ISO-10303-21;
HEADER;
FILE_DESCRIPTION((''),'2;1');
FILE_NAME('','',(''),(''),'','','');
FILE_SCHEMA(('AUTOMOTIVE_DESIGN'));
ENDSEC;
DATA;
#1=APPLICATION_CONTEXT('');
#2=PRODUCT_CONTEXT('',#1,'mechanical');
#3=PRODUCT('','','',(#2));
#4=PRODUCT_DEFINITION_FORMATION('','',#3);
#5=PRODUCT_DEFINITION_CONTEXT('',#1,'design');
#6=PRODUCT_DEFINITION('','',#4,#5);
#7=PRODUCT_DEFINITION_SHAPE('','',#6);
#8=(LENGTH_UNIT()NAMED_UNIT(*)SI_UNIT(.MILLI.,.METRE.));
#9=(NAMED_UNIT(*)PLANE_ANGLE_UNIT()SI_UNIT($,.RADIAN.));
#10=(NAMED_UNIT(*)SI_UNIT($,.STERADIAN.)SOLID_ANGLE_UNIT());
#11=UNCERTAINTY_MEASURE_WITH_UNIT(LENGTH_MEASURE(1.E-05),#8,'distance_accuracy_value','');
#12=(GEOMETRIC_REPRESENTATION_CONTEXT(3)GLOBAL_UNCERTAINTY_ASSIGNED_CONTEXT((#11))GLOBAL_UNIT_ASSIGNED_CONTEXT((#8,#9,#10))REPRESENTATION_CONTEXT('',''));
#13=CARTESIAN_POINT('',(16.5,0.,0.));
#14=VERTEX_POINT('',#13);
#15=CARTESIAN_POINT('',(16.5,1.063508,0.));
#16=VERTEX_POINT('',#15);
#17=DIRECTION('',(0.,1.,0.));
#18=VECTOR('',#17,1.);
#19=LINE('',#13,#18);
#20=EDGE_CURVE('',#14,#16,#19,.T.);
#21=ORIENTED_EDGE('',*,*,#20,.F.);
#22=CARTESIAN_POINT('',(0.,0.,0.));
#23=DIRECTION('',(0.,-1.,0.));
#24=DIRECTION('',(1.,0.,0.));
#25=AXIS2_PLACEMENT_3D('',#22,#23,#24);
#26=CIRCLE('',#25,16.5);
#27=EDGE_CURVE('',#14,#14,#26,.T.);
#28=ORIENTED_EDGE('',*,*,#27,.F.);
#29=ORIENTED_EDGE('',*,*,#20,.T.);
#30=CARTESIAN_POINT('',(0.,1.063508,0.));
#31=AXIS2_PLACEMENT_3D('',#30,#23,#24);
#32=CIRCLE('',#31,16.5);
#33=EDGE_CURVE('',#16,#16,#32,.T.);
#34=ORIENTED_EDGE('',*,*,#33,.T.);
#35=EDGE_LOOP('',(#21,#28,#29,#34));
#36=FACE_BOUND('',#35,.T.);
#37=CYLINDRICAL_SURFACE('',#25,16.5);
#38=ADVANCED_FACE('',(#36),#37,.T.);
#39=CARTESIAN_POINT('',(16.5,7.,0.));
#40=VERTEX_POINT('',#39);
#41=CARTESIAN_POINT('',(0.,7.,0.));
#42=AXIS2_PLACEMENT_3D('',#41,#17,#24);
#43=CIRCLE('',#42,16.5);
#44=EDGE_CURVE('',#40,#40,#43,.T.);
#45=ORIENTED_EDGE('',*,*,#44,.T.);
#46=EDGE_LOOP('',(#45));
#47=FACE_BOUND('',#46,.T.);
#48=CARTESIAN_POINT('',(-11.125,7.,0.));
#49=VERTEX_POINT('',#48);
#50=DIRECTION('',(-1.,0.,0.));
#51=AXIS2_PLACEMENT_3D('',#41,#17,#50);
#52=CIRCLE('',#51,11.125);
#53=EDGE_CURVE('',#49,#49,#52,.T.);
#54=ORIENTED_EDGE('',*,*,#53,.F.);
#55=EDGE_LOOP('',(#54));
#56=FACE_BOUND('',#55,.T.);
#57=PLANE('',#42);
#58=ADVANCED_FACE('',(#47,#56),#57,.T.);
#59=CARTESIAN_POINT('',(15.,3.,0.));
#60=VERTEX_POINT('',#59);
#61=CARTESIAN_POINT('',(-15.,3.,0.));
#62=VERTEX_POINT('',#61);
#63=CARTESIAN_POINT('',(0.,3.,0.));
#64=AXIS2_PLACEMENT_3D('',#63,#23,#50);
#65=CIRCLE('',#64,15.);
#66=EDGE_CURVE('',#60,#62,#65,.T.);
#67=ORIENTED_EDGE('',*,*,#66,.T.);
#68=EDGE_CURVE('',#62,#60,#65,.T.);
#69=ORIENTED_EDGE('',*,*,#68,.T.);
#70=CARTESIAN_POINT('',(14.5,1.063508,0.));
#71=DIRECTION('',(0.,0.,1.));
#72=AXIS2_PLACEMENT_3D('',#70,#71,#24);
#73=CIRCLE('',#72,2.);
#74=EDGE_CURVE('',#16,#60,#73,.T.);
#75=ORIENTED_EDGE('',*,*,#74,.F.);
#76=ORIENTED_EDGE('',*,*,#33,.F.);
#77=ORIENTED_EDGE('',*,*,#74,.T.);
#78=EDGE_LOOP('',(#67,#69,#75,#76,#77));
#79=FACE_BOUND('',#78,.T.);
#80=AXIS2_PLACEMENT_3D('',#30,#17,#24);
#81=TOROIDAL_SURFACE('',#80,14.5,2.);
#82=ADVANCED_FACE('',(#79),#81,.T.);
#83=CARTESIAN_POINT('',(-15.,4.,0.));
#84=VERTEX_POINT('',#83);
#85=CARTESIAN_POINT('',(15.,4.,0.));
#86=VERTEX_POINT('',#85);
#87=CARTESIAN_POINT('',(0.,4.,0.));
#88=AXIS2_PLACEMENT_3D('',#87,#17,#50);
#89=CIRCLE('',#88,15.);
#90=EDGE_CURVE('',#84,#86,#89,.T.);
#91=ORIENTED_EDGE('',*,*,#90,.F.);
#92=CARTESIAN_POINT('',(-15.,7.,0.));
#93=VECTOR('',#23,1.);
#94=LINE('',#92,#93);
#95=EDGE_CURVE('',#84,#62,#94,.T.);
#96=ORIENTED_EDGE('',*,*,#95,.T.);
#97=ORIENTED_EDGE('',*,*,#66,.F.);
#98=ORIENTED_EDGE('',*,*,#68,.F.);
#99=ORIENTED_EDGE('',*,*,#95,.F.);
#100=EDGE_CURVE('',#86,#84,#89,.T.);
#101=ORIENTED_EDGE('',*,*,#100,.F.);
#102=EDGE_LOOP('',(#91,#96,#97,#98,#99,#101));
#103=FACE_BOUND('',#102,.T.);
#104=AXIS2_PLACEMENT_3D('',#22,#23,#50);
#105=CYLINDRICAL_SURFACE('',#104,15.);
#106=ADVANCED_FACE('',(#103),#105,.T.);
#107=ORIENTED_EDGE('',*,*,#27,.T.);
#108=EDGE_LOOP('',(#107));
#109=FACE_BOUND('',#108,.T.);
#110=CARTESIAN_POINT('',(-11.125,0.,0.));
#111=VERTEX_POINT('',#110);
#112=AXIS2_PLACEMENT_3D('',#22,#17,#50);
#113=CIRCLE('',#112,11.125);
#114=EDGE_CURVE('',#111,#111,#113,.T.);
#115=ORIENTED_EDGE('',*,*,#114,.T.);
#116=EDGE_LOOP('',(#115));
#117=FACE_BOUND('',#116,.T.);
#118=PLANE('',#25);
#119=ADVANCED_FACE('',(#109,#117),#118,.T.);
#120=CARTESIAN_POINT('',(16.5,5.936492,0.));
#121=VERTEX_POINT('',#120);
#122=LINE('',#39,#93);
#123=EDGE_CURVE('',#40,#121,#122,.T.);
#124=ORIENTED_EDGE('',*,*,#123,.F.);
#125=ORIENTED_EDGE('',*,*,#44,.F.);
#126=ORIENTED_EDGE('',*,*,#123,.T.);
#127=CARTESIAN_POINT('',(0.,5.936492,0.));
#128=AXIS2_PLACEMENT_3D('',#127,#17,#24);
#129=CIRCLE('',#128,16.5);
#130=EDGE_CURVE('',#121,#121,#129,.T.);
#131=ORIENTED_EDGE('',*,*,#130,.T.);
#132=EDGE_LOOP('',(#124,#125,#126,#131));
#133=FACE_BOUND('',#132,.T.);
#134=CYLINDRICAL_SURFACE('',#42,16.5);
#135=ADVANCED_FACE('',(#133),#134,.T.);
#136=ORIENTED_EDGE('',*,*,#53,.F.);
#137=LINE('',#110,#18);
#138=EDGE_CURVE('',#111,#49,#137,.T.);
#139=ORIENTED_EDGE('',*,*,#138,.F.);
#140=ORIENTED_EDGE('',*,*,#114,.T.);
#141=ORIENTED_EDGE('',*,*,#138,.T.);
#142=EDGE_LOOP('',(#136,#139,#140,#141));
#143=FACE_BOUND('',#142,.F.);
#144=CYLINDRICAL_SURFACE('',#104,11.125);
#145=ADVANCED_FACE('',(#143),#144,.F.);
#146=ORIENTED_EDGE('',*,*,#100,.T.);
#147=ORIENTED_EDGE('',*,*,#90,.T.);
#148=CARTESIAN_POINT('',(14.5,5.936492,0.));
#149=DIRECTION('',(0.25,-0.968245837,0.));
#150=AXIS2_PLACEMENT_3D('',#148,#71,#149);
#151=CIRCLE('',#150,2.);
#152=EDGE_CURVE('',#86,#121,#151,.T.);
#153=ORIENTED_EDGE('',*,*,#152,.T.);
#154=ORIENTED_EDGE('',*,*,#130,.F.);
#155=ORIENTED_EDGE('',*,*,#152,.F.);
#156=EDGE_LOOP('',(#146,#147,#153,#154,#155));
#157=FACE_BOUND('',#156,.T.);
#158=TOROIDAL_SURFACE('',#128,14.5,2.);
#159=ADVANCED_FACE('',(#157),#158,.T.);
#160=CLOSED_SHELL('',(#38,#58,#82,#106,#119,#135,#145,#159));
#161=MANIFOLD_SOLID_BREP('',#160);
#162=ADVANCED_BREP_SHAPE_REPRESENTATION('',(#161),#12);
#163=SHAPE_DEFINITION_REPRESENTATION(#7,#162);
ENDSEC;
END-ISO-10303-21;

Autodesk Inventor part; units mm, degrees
ref_plane "YZ Plane" through (0, 0, 0) normal (1, 0, 0) x (0, 1, 0)
ref_plane "XZ Plane" through (0, 0, 0) normal (0, 1, 0) x (-1, 0, 0)
ref_plane "XY Plane" through (0, 0, 0) normal (0, 0, 1) x (1, 0, 0)
sketch "Sketch1" plane through (0, 0, 0) normal (0, 1, 0) x (-1, 0, 0)
  circle A0 centre (0, 0) radius 11.125
  circle A1 centre (0, 0) radius 15
  dimension "d0" = 22.25
  dimension "d1" = 30
extrude "Extrusion1" add sketch "Sketch1" along normal blind 7
sketch "Sketch2" plane through (0, 7, 0) normal (0, 1, 0) x (1, 0, 0)
  circle A0 centre (0, 0) radius 13.625
  circle A1 centre (0, 0) radius 15
  dimension "d4" = 30
extrude "Extrusion2" add sketch "Sketch2" against normal blind 3
sketch "Sketch3" plane through (0, 0, 0) normal (0, -1, 0) x (1, 0, 0)
  circle A0 centre (0, 0) radius 13.625
  circle A1 centre (0, 0) radius 15
  dimension "d7" = 30
extrude "Extrusion3" add sketch "Sketch3" against normal blind 3
sketch "Sketch4" plane through (0, 7, 0) normal (0, 1, 0) x (1, 0, 0)
  circle A0 centre (0, 0) radius 15
  circle A1 centre (0, 0) radius 16.5
  dimension "d12" = 33
extrude "Extrusion4" add sketch "Sketch4" against normal blind 3
sketch "Sketch5" plane through (0, 0, 0) normal (0, -1, 0) x (1, 0, 0)
  circle A0 centre (0, 0) radius 15
  circle A1 centre (0, 0) radius 16.5
extrude "Extrusion5" add sketch "Sketch5" against normal blind 3
fillet "Fillet3" radius 2 1 edges at (-16.5, 4, 0)
fillet "Fillet4" radius 2 1 edges at (-16.5, 3, 0)
properties part number "OutterBearing"
